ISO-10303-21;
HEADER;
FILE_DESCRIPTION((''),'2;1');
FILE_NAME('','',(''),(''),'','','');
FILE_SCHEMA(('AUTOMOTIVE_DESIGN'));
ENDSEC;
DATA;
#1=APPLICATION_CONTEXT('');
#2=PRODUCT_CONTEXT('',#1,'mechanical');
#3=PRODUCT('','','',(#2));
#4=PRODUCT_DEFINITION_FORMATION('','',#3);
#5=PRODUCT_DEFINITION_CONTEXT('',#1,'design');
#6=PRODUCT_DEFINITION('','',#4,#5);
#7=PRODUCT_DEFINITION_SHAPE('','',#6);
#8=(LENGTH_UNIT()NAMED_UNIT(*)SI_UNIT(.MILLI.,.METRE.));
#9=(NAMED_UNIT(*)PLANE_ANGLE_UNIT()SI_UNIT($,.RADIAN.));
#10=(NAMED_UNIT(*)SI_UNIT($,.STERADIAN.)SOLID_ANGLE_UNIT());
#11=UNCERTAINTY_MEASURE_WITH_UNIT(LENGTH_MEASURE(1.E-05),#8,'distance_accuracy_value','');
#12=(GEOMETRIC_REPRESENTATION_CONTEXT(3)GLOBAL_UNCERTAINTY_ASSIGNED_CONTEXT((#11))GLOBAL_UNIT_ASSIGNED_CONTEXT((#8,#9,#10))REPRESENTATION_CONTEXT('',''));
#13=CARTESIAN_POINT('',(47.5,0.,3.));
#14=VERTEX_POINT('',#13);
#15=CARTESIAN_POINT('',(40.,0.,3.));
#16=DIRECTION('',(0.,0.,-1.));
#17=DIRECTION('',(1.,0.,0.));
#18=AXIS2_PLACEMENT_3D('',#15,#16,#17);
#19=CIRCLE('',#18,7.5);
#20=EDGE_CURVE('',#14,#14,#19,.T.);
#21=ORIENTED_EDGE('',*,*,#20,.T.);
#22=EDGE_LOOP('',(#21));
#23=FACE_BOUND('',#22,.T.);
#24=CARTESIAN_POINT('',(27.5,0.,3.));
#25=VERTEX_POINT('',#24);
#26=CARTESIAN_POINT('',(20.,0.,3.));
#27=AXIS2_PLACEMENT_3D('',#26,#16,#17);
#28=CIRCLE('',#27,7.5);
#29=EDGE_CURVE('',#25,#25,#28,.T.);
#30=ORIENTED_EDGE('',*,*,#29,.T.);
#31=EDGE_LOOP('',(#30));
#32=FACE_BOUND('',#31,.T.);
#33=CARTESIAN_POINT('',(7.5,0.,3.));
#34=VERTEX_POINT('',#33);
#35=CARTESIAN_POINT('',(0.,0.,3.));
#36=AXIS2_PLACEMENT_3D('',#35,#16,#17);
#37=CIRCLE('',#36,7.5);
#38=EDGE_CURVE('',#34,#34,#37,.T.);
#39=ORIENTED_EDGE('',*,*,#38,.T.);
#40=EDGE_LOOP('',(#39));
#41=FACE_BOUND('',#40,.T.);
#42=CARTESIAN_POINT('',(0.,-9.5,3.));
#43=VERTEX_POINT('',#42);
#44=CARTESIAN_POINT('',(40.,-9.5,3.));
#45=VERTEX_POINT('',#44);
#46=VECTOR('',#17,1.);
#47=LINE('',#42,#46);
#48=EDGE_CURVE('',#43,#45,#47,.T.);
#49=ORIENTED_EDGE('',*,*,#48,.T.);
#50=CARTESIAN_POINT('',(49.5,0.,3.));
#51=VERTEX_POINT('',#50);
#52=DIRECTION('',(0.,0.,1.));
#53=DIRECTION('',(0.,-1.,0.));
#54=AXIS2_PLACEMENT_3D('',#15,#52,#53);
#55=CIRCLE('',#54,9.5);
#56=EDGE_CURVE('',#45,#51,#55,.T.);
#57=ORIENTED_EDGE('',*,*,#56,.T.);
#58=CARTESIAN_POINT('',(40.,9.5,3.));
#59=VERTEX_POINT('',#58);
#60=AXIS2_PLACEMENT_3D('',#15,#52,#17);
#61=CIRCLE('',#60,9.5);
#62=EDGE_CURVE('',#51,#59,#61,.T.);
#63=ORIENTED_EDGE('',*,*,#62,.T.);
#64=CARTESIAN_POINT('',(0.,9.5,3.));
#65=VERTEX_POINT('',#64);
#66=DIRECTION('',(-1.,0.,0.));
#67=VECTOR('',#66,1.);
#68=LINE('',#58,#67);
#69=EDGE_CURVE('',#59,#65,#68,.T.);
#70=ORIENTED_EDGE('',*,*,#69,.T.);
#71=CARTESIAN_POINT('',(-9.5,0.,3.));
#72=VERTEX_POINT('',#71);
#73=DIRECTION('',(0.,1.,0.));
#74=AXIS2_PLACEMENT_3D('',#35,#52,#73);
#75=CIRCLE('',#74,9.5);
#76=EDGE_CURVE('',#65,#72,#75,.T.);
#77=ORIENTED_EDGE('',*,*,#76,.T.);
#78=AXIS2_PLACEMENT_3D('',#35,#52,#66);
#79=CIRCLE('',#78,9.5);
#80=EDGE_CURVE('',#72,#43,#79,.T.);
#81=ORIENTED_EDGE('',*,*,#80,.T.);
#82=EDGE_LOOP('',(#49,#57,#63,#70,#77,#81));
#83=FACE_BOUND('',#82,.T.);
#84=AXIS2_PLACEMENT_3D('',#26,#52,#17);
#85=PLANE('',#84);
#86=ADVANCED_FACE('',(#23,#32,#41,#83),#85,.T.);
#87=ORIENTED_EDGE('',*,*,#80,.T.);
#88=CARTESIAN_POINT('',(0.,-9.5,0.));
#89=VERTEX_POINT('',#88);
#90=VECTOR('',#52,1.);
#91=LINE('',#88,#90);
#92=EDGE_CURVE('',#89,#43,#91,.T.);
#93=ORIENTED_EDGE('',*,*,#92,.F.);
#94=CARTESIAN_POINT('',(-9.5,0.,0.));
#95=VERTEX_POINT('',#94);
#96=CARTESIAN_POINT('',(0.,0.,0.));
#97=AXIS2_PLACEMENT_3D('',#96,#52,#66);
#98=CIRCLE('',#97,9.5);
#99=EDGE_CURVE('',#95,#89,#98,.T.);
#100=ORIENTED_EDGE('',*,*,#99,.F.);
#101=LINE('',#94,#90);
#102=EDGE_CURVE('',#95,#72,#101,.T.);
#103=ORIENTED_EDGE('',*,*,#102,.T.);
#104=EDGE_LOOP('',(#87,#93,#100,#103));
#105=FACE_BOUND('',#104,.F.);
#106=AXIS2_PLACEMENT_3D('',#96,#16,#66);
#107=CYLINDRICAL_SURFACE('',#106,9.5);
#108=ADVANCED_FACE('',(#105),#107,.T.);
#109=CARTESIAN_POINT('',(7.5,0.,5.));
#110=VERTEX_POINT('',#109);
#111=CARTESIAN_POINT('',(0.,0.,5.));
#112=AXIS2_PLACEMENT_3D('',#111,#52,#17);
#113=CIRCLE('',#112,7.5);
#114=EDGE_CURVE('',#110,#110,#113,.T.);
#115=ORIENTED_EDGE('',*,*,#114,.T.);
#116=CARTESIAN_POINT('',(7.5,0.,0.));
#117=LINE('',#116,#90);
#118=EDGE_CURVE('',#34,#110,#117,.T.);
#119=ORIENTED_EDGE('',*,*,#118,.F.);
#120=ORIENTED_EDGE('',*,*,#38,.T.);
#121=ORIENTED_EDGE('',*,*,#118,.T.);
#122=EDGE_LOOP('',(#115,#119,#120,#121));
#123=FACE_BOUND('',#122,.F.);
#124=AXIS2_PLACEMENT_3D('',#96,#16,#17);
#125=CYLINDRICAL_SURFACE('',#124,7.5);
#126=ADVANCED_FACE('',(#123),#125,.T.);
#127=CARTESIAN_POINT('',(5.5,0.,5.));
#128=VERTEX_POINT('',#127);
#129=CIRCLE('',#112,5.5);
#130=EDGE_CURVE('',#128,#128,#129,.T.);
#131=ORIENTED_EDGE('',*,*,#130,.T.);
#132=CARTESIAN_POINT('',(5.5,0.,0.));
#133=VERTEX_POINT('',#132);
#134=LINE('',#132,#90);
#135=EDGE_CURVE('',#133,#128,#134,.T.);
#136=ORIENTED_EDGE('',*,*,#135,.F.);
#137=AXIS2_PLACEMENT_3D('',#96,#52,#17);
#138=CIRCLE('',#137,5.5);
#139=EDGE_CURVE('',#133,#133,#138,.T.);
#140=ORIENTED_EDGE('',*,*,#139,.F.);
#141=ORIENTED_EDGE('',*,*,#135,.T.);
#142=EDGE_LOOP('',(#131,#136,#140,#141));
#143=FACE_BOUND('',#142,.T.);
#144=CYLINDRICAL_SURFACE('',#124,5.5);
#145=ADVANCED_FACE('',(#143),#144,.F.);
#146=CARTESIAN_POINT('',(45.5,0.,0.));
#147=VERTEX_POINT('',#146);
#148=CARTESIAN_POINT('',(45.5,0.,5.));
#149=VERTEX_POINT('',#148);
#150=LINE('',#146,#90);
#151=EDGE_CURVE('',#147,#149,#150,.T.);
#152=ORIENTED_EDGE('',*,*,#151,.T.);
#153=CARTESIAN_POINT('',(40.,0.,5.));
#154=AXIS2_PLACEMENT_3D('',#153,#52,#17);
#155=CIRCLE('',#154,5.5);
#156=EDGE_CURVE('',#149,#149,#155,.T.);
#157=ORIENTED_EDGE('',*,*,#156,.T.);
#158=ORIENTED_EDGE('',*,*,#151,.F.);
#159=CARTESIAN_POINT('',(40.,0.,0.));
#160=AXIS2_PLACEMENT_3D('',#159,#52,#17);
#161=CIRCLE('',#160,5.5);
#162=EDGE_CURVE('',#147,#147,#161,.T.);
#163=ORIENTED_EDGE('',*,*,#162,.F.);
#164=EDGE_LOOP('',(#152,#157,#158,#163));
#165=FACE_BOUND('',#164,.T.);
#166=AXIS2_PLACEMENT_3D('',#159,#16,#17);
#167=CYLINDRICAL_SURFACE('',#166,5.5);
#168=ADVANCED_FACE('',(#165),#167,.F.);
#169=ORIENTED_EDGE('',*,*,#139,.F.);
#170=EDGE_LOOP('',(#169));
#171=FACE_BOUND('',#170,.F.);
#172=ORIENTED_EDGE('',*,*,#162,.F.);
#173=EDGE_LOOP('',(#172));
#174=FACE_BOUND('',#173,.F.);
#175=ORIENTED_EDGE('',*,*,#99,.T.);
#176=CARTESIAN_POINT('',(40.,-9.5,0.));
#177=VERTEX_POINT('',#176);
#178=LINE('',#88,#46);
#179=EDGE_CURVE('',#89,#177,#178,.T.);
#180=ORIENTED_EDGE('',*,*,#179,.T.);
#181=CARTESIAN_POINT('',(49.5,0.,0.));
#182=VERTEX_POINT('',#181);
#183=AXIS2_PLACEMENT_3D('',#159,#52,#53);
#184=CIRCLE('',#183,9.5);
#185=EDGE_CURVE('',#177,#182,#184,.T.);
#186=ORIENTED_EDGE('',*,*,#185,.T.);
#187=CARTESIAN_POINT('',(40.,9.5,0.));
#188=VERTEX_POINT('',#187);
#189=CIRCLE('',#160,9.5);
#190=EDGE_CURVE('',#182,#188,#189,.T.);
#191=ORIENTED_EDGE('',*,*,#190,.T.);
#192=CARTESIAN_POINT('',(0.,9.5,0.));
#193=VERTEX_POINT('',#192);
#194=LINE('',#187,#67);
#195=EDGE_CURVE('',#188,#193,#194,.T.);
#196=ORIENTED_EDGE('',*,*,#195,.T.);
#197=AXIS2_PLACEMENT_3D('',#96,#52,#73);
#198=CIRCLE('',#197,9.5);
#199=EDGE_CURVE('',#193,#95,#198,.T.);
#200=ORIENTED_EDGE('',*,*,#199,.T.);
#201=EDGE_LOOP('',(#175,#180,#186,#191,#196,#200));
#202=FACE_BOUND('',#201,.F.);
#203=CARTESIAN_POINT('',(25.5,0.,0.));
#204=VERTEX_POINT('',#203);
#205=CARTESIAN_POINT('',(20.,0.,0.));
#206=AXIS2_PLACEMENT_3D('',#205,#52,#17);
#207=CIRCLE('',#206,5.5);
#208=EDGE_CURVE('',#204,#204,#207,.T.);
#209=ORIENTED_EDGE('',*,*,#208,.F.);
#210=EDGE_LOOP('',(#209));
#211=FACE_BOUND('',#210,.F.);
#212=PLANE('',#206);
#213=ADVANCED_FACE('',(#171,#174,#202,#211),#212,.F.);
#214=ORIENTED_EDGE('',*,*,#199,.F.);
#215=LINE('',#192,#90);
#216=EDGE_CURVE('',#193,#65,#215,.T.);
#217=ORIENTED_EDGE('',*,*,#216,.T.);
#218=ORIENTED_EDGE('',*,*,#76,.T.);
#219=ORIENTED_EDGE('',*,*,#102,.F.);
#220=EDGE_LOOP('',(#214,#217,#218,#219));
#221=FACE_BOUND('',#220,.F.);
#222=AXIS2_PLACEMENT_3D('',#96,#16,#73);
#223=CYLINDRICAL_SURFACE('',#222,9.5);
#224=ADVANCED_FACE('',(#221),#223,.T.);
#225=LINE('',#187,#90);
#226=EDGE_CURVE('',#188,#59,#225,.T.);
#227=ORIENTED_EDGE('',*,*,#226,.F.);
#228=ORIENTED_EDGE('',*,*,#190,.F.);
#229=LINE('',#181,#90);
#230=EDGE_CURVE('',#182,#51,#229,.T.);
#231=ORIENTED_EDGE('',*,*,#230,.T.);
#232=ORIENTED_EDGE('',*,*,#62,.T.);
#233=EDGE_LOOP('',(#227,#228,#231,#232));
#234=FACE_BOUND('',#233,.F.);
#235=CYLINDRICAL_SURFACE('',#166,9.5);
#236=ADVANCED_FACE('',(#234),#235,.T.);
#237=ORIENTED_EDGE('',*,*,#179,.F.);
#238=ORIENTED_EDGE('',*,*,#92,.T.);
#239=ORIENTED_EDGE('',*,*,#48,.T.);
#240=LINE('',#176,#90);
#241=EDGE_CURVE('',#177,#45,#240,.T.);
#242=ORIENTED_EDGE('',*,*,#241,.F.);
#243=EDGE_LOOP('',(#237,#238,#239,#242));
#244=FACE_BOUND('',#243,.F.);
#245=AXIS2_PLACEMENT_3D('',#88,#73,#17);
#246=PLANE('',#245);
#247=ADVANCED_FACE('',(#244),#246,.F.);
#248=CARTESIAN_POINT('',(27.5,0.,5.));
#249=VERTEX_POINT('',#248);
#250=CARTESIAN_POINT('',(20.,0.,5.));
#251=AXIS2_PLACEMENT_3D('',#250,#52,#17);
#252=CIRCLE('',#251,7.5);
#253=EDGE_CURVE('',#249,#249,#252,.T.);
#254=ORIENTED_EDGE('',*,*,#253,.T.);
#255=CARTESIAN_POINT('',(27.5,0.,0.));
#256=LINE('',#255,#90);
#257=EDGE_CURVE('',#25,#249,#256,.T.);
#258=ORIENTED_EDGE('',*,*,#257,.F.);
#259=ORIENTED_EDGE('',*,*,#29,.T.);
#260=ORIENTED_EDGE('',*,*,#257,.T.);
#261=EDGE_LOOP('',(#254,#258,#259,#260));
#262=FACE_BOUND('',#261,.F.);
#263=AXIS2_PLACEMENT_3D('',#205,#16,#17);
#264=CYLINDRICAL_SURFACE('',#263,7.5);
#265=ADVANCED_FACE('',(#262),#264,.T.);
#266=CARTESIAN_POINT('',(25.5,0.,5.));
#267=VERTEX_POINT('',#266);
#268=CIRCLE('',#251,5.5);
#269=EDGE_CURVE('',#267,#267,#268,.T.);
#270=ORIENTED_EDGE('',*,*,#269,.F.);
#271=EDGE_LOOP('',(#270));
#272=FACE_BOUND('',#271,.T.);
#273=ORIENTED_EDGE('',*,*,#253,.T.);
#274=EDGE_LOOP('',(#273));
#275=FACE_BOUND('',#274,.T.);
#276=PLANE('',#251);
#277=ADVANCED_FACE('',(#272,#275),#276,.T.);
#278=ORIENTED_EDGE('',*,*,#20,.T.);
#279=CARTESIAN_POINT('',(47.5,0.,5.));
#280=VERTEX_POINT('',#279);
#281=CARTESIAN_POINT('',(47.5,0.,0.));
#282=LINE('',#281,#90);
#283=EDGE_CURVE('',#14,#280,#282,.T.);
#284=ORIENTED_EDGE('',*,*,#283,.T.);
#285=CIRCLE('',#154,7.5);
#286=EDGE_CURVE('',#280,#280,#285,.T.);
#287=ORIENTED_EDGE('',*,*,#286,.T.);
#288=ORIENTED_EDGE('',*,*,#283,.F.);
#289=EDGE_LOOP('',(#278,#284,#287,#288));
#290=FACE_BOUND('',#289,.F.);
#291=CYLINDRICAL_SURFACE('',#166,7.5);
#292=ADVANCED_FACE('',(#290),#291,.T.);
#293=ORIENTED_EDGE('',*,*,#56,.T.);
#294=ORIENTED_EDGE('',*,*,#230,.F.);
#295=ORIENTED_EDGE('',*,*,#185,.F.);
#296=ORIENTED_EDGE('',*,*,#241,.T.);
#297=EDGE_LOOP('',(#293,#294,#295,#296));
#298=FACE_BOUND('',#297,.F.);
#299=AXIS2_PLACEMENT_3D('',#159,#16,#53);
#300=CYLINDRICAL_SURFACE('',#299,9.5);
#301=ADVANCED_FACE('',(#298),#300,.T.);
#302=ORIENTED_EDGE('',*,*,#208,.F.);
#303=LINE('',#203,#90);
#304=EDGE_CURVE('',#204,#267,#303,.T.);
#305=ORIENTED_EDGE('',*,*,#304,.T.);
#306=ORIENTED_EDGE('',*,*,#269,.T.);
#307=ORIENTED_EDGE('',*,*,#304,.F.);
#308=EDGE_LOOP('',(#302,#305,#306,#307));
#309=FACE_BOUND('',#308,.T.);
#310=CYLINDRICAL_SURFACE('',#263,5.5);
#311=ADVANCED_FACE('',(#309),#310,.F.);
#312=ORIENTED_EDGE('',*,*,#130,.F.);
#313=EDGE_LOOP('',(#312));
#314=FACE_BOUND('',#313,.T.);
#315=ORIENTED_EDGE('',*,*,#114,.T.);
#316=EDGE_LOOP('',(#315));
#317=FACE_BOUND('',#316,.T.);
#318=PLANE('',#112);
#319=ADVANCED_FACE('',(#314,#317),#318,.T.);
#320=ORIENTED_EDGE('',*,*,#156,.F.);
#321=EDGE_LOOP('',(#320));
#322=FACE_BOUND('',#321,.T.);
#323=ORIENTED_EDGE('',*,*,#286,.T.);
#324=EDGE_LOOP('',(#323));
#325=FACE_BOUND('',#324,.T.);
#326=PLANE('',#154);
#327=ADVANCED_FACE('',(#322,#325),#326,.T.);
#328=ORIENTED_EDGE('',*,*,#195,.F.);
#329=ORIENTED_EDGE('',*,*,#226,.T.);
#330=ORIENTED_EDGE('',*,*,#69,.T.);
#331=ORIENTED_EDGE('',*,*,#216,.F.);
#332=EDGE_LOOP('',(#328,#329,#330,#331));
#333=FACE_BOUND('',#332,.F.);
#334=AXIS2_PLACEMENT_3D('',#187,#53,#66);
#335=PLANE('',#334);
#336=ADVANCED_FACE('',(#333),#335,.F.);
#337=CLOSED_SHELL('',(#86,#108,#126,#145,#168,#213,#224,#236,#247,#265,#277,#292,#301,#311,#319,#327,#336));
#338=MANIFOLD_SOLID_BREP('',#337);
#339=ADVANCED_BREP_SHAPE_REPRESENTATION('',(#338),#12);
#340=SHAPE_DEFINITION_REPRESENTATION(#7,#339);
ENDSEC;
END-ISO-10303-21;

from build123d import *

# Parameters (mm, degrees)
F2_R     = 7.5
F2_R_2   = 5.5
F3_DEPTH = 3
F4_DEPTH = 5


# Not quite as in the source:
# - a feature names something its author has since deleted; it is built from what else it names


with BuildPart() as f3:
    # F2 (on Top) → F3 (new body)
    with BuildSketch(Plane.XY):
        with BuildLine():
            Line((40, 9.5), (0, 9.5))
            ThreePointArc((0, 9.5), (-6.7175144213, 6.7175144213), (-9.5, 0))
            ThreePointArc((-9.5, 0), (-6.7175144213, -6.7175144213), (0, -9.5))
            Line((0, -9.5), (40, -9.5))
            ThreePointArc((40, -9.5), (46.7175144213, -6.7175144213), (49.5, 0))
            ThreePointArc((49.5, 0), (46.7175144213, 6.7175144213), (40, 9.5))
        make_face()
        Circle(F2_R, mode=Mode.SUBTRACT)
        with Locations((20, 0)):
            Circle(F2_R, mode=Mode.SUBTRACT)
        with Locations((40, 0)):
            Circle(F2_R, mode=Mode.SUBTRACT)
        Circle(F2_R)
        Circle(F2_R_2, mode=Mode.SUBTRACT)
        with Locations((20, 0)):
            Circle(F2_R)
        with Locations((20, 0)):
            Circle(F2_R_2, mode=Mode.SUBTRACT)
        with Locations((40, 0)):
            Circle(F2_R)
        with Locations((40, 0)):
            Circle(F2_R_2, mode=Mode.SUBTRACT)
    extrude(amount=F3_DEPTH)

    # F2 (on Top) → F4 (join)
    with BuildSketch(Plane.XY):
        Circle(F2_R)
        Circle(F2_R_2, mode=Mode.SUBTRACT)
        with Locations((20, 0)):
            Circle(F2_R)
        with Locations((20, 0)):
            Circle(F2_R_2, mode=Mode.SUBTRACT)
        with Locations((40, 0)):
            Circle(F2_R)
        with Locations((40, 0)):
            Circle(F2_R_2, mode=Mode.SUBTRACT)
    extrude(amount=F4_DEPTH)


solid = f3.part
